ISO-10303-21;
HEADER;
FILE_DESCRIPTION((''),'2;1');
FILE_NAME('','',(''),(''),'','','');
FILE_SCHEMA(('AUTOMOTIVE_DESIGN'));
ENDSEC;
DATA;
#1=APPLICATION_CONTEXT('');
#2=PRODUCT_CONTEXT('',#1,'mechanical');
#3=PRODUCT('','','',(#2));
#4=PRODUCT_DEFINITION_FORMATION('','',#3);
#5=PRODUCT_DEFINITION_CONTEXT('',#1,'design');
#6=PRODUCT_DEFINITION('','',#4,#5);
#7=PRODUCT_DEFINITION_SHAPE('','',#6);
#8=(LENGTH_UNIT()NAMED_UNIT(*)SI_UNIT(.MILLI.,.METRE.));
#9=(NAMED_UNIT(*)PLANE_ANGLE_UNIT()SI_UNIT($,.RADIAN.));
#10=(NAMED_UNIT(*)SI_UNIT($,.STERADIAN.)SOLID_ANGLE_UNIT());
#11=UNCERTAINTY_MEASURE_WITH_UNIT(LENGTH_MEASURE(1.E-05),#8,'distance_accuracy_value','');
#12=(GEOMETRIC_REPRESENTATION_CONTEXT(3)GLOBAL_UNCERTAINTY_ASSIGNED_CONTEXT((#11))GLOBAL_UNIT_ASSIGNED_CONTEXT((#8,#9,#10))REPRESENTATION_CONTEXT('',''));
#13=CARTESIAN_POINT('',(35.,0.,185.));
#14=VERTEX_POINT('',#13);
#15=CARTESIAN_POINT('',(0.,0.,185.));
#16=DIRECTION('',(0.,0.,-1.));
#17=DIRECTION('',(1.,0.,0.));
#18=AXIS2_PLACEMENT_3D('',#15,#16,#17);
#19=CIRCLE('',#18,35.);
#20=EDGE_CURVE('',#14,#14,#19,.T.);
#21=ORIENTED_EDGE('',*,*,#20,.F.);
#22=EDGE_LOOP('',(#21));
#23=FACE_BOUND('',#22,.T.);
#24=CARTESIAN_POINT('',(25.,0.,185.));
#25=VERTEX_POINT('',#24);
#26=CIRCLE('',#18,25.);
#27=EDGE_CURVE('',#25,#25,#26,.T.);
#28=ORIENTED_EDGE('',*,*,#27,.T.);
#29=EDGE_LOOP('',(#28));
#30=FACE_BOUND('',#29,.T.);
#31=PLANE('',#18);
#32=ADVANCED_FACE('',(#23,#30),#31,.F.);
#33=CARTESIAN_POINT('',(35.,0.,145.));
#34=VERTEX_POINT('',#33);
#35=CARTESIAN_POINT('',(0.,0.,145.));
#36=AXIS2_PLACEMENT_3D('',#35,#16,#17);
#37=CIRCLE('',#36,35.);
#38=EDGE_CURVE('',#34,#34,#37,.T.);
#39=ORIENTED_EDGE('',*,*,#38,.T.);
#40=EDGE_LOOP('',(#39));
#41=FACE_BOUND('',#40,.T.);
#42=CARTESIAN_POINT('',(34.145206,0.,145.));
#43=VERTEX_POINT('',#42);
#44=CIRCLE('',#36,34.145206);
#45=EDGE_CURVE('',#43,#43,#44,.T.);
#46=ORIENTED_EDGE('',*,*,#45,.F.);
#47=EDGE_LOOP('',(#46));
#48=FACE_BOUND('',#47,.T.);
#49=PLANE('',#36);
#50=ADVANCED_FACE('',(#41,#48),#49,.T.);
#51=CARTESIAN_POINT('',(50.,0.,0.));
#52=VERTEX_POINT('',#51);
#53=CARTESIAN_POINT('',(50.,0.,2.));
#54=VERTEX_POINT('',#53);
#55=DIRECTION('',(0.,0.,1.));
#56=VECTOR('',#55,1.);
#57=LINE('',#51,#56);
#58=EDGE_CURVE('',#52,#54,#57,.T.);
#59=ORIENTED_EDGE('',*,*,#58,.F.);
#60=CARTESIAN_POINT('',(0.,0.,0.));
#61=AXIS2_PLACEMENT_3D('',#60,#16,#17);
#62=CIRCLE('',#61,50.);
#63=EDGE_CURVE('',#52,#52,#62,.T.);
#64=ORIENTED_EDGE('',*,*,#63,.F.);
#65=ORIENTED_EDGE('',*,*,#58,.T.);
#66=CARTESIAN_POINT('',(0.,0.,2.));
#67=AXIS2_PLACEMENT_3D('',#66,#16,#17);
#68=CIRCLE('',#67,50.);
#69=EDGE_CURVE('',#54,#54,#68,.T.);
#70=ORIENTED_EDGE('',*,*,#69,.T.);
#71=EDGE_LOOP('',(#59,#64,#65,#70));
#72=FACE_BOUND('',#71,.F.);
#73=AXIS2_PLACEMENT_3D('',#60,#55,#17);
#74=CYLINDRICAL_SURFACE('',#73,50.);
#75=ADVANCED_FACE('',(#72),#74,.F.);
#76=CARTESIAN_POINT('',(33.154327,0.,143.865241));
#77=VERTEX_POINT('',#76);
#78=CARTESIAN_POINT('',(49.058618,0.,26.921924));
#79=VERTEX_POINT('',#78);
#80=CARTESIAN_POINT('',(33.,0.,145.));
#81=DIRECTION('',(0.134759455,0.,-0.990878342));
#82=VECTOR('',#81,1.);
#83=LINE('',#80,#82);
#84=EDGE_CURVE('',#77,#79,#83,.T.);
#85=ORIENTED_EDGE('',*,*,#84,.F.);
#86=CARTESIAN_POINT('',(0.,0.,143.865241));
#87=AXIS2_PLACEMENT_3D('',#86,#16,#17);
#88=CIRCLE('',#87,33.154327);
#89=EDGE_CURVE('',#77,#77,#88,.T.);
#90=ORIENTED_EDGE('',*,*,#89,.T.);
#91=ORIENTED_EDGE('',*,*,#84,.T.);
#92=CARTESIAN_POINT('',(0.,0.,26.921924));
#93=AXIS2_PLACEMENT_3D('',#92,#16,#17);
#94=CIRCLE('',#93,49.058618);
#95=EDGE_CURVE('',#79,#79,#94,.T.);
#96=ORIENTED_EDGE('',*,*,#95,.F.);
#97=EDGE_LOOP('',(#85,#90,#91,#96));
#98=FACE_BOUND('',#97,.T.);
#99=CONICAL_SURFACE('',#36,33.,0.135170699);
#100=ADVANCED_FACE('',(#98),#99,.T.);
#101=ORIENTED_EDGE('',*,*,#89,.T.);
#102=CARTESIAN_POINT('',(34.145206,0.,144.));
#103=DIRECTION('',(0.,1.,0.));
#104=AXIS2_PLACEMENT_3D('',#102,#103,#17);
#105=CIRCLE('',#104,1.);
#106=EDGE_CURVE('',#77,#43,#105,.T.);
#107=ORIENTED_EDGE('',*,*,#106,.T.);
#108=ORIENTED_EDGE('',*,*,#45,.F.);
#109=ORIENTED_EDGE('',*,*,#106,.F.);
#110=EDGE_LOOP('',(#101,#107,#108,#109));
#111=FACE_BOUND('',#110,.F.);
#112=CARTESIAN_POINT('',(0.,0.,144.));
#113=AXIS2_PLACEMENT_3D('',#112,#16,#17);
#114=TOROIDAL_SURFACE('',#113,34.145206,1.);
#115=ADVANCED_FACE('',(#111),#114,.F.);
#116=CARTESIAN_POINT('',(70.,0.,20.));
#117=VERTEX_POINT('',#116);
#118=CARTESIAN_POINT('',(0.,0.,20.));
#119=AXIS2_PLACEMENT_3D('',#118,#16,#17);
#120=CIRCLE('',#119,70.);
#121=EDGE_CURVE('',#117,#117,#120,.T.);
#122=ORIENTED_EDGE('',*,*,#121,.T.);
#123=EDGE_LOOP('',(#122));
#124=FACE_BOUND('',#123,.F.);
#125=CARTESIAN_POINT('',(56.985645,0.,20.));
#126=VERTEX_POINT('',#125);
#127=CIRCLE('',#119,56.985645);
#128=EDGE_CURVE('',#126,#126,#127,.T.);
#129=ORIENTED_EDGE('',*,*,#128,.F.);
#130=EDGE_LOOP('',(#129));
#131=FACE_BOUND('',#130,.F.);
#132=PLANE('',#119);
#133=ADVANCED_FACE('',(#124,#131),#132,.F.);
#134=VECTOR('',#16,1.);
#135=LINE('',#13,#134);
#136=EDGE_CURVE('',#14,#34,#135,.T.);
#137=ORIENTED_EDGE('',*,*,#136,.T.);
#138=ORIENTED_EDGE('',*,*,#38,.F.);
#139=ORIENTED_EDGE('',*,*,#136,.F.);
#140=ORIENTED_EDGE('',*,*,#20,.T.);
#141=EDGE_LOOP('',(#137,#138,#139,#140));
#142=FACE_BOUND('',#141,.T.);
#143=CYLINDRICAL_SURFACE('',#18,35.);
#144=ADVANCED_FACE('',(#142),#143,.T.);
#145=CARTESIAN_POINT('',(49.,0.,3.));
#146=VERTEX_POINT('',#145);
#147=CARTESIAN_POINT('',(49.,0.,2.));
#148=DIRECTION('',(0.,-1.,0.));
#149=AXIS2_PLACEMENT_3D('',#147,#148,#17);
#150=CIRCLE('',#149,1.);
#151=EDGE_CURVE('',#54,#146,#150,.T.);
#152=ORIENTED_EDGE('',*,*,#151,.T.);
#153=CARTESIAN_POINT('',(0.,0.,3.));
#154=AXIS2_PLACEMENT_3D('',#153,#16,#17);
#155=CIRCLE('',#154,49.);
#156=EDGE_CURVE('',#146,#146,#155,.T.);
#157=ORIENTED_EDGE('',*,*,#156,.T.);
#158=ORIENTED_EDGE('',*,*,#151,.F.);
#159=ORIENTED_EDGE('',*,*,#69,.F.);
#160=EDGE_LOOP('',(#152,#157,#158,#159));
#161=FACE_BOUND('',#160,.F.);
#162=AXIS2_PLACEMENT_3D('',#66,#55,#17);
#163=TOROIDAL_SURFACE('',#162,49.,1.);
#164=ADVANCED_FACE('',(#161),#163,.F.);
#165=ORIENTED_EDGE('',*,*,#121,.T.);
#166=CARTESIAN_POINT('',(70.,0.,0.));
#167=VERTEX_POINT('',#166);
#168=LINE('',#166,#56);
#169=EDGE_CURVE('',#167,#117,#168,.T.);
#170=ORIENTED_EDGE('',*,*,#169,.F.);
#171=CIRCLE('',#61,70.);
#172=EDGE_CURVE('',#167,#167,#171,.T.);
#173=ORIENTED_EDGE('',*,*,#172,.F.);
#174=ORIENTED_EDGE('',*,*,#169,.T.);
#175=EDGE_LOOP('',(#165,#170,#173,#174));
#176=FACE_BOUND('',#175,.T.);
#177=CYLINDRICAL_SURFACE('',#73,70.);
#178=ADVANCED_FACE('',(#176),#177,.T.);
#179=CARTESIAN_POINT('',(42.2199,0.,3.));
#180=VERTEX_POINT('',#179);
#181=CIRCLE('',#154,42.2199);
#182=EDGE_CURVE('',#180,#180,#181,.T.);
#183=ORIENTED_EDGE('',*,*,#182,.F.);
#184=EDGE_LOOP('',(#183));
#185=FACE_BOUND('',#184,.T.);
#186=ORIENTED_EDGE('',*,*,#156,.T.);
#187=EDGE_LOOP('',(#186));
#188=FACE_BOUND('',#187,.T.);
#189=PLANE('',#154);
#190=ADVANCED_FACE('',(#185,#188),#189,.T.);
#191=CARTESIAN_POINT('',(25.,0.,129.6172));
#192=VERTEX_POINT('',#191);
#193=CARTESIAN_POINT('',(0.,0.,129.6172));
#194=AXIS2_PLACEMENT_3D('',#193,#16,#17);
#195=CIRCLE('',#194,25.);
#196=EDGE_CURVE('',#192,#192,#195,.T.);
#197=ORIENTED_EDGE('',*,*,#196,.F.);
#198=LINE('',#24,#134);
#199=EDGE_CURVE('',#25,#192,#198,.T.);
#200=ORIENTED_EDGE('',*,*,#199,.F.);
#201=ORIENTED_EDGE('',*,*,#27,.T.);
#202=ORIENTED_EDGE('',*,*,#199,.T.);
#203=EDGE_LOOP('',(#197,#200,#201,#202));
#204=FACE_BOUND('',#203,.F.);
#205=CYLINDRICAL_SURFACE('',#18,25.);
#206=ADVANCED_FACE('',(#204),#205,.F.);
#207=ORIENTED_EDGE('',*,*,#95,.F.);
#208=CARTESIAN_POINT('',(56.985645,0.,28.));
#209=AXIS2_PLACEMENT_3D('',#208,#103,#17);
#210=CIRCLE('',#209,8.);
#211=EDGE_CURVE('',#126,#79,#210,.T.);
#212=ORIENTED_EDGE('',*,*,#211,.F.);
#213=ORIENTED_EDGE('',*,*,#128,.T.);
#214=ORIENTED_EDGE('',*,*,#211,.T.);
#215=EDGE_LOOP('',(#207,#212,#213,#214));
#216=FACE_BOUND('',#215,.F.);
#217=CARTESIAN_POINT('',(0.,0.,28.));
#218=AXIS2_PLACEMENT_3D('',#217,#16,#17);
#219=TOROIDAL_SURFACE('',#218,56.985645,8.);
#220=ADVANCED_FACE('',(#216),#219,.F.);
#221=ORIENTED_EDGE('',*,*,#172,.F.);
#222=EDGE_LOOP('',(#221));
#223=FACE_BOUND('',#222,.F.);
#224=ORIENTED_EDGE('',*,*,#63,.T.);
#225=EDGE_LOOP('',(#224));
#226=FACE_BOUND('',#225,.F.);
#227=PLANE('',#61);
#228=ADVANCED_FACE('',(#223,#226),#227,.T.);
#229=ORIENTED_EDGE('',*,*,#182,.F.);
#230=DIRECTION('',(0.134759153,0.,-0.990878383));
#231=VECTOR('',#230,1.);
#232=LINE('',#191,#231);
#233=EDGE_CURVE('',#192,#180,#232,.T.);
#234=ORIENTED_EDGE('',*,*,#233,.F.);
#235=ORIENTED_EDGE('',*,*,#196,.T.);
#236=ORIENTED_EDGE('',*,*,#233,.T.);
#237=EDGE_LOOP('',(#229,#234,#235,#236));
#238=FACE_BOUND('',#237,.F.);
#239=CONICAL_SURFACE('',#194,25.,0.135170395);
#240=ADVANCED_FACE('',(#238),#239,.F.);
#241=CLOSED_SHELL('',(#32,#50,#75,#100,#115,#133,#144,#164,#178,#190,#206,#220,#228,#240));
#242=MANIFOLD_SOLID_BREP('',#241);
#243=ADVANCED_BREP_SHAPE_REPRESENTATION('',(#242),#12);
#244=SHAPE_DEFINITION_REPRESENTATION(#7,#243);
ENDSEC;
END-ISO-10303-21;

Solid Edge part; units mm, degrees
sketch "Sketch1" plane through (0, 0, 0) normal (0, -1, 0) x (1, 0, 0)
  line L0 (25, 129.6172) -> (42.2199, 3)
  line L1 (50, 3) -> (42.2199, 3)
  line L2 (50, 0) -> (50, 3)
  line L3 (50, 0) -> (70, 0)
  line L4 (70, 0) -> (70, 20)
  line L5 (70, 20) -> (50, 20)
  line L6 (33, 145) -> (50, 20)
  line L7 (35, 145) -> (33, 145)
  line L8 (35, 185) -> (35, 145)
  line L9 (25, 185) -> (35, 185)
  line L10 (25, 185) -> (25, 129.6172)
  dimension "D1" = 50
  dimension "D2" = 70
  dimension "D3" = 20
  dimension "D4" = 3
  dimension "D5" = 20
  dimension "D6" = 25
  dimension "D7" = 35
  dimension "D8" = 10
  dimension "D9" = 40
  dimension "D10" = 2
  dimension "D11" = 185
revolve "RevolvedProtrusion1" add sketch "Sketch1" angle 360 about axis through (0, 0, 54) along (0, 0, -1)
fillet "Round_1" radius 8 1 edges at (-50, 0, 20)
fillet "Round_1" radius 1 2 edges at (-50, 0, 3) (-33, 0, 145)
